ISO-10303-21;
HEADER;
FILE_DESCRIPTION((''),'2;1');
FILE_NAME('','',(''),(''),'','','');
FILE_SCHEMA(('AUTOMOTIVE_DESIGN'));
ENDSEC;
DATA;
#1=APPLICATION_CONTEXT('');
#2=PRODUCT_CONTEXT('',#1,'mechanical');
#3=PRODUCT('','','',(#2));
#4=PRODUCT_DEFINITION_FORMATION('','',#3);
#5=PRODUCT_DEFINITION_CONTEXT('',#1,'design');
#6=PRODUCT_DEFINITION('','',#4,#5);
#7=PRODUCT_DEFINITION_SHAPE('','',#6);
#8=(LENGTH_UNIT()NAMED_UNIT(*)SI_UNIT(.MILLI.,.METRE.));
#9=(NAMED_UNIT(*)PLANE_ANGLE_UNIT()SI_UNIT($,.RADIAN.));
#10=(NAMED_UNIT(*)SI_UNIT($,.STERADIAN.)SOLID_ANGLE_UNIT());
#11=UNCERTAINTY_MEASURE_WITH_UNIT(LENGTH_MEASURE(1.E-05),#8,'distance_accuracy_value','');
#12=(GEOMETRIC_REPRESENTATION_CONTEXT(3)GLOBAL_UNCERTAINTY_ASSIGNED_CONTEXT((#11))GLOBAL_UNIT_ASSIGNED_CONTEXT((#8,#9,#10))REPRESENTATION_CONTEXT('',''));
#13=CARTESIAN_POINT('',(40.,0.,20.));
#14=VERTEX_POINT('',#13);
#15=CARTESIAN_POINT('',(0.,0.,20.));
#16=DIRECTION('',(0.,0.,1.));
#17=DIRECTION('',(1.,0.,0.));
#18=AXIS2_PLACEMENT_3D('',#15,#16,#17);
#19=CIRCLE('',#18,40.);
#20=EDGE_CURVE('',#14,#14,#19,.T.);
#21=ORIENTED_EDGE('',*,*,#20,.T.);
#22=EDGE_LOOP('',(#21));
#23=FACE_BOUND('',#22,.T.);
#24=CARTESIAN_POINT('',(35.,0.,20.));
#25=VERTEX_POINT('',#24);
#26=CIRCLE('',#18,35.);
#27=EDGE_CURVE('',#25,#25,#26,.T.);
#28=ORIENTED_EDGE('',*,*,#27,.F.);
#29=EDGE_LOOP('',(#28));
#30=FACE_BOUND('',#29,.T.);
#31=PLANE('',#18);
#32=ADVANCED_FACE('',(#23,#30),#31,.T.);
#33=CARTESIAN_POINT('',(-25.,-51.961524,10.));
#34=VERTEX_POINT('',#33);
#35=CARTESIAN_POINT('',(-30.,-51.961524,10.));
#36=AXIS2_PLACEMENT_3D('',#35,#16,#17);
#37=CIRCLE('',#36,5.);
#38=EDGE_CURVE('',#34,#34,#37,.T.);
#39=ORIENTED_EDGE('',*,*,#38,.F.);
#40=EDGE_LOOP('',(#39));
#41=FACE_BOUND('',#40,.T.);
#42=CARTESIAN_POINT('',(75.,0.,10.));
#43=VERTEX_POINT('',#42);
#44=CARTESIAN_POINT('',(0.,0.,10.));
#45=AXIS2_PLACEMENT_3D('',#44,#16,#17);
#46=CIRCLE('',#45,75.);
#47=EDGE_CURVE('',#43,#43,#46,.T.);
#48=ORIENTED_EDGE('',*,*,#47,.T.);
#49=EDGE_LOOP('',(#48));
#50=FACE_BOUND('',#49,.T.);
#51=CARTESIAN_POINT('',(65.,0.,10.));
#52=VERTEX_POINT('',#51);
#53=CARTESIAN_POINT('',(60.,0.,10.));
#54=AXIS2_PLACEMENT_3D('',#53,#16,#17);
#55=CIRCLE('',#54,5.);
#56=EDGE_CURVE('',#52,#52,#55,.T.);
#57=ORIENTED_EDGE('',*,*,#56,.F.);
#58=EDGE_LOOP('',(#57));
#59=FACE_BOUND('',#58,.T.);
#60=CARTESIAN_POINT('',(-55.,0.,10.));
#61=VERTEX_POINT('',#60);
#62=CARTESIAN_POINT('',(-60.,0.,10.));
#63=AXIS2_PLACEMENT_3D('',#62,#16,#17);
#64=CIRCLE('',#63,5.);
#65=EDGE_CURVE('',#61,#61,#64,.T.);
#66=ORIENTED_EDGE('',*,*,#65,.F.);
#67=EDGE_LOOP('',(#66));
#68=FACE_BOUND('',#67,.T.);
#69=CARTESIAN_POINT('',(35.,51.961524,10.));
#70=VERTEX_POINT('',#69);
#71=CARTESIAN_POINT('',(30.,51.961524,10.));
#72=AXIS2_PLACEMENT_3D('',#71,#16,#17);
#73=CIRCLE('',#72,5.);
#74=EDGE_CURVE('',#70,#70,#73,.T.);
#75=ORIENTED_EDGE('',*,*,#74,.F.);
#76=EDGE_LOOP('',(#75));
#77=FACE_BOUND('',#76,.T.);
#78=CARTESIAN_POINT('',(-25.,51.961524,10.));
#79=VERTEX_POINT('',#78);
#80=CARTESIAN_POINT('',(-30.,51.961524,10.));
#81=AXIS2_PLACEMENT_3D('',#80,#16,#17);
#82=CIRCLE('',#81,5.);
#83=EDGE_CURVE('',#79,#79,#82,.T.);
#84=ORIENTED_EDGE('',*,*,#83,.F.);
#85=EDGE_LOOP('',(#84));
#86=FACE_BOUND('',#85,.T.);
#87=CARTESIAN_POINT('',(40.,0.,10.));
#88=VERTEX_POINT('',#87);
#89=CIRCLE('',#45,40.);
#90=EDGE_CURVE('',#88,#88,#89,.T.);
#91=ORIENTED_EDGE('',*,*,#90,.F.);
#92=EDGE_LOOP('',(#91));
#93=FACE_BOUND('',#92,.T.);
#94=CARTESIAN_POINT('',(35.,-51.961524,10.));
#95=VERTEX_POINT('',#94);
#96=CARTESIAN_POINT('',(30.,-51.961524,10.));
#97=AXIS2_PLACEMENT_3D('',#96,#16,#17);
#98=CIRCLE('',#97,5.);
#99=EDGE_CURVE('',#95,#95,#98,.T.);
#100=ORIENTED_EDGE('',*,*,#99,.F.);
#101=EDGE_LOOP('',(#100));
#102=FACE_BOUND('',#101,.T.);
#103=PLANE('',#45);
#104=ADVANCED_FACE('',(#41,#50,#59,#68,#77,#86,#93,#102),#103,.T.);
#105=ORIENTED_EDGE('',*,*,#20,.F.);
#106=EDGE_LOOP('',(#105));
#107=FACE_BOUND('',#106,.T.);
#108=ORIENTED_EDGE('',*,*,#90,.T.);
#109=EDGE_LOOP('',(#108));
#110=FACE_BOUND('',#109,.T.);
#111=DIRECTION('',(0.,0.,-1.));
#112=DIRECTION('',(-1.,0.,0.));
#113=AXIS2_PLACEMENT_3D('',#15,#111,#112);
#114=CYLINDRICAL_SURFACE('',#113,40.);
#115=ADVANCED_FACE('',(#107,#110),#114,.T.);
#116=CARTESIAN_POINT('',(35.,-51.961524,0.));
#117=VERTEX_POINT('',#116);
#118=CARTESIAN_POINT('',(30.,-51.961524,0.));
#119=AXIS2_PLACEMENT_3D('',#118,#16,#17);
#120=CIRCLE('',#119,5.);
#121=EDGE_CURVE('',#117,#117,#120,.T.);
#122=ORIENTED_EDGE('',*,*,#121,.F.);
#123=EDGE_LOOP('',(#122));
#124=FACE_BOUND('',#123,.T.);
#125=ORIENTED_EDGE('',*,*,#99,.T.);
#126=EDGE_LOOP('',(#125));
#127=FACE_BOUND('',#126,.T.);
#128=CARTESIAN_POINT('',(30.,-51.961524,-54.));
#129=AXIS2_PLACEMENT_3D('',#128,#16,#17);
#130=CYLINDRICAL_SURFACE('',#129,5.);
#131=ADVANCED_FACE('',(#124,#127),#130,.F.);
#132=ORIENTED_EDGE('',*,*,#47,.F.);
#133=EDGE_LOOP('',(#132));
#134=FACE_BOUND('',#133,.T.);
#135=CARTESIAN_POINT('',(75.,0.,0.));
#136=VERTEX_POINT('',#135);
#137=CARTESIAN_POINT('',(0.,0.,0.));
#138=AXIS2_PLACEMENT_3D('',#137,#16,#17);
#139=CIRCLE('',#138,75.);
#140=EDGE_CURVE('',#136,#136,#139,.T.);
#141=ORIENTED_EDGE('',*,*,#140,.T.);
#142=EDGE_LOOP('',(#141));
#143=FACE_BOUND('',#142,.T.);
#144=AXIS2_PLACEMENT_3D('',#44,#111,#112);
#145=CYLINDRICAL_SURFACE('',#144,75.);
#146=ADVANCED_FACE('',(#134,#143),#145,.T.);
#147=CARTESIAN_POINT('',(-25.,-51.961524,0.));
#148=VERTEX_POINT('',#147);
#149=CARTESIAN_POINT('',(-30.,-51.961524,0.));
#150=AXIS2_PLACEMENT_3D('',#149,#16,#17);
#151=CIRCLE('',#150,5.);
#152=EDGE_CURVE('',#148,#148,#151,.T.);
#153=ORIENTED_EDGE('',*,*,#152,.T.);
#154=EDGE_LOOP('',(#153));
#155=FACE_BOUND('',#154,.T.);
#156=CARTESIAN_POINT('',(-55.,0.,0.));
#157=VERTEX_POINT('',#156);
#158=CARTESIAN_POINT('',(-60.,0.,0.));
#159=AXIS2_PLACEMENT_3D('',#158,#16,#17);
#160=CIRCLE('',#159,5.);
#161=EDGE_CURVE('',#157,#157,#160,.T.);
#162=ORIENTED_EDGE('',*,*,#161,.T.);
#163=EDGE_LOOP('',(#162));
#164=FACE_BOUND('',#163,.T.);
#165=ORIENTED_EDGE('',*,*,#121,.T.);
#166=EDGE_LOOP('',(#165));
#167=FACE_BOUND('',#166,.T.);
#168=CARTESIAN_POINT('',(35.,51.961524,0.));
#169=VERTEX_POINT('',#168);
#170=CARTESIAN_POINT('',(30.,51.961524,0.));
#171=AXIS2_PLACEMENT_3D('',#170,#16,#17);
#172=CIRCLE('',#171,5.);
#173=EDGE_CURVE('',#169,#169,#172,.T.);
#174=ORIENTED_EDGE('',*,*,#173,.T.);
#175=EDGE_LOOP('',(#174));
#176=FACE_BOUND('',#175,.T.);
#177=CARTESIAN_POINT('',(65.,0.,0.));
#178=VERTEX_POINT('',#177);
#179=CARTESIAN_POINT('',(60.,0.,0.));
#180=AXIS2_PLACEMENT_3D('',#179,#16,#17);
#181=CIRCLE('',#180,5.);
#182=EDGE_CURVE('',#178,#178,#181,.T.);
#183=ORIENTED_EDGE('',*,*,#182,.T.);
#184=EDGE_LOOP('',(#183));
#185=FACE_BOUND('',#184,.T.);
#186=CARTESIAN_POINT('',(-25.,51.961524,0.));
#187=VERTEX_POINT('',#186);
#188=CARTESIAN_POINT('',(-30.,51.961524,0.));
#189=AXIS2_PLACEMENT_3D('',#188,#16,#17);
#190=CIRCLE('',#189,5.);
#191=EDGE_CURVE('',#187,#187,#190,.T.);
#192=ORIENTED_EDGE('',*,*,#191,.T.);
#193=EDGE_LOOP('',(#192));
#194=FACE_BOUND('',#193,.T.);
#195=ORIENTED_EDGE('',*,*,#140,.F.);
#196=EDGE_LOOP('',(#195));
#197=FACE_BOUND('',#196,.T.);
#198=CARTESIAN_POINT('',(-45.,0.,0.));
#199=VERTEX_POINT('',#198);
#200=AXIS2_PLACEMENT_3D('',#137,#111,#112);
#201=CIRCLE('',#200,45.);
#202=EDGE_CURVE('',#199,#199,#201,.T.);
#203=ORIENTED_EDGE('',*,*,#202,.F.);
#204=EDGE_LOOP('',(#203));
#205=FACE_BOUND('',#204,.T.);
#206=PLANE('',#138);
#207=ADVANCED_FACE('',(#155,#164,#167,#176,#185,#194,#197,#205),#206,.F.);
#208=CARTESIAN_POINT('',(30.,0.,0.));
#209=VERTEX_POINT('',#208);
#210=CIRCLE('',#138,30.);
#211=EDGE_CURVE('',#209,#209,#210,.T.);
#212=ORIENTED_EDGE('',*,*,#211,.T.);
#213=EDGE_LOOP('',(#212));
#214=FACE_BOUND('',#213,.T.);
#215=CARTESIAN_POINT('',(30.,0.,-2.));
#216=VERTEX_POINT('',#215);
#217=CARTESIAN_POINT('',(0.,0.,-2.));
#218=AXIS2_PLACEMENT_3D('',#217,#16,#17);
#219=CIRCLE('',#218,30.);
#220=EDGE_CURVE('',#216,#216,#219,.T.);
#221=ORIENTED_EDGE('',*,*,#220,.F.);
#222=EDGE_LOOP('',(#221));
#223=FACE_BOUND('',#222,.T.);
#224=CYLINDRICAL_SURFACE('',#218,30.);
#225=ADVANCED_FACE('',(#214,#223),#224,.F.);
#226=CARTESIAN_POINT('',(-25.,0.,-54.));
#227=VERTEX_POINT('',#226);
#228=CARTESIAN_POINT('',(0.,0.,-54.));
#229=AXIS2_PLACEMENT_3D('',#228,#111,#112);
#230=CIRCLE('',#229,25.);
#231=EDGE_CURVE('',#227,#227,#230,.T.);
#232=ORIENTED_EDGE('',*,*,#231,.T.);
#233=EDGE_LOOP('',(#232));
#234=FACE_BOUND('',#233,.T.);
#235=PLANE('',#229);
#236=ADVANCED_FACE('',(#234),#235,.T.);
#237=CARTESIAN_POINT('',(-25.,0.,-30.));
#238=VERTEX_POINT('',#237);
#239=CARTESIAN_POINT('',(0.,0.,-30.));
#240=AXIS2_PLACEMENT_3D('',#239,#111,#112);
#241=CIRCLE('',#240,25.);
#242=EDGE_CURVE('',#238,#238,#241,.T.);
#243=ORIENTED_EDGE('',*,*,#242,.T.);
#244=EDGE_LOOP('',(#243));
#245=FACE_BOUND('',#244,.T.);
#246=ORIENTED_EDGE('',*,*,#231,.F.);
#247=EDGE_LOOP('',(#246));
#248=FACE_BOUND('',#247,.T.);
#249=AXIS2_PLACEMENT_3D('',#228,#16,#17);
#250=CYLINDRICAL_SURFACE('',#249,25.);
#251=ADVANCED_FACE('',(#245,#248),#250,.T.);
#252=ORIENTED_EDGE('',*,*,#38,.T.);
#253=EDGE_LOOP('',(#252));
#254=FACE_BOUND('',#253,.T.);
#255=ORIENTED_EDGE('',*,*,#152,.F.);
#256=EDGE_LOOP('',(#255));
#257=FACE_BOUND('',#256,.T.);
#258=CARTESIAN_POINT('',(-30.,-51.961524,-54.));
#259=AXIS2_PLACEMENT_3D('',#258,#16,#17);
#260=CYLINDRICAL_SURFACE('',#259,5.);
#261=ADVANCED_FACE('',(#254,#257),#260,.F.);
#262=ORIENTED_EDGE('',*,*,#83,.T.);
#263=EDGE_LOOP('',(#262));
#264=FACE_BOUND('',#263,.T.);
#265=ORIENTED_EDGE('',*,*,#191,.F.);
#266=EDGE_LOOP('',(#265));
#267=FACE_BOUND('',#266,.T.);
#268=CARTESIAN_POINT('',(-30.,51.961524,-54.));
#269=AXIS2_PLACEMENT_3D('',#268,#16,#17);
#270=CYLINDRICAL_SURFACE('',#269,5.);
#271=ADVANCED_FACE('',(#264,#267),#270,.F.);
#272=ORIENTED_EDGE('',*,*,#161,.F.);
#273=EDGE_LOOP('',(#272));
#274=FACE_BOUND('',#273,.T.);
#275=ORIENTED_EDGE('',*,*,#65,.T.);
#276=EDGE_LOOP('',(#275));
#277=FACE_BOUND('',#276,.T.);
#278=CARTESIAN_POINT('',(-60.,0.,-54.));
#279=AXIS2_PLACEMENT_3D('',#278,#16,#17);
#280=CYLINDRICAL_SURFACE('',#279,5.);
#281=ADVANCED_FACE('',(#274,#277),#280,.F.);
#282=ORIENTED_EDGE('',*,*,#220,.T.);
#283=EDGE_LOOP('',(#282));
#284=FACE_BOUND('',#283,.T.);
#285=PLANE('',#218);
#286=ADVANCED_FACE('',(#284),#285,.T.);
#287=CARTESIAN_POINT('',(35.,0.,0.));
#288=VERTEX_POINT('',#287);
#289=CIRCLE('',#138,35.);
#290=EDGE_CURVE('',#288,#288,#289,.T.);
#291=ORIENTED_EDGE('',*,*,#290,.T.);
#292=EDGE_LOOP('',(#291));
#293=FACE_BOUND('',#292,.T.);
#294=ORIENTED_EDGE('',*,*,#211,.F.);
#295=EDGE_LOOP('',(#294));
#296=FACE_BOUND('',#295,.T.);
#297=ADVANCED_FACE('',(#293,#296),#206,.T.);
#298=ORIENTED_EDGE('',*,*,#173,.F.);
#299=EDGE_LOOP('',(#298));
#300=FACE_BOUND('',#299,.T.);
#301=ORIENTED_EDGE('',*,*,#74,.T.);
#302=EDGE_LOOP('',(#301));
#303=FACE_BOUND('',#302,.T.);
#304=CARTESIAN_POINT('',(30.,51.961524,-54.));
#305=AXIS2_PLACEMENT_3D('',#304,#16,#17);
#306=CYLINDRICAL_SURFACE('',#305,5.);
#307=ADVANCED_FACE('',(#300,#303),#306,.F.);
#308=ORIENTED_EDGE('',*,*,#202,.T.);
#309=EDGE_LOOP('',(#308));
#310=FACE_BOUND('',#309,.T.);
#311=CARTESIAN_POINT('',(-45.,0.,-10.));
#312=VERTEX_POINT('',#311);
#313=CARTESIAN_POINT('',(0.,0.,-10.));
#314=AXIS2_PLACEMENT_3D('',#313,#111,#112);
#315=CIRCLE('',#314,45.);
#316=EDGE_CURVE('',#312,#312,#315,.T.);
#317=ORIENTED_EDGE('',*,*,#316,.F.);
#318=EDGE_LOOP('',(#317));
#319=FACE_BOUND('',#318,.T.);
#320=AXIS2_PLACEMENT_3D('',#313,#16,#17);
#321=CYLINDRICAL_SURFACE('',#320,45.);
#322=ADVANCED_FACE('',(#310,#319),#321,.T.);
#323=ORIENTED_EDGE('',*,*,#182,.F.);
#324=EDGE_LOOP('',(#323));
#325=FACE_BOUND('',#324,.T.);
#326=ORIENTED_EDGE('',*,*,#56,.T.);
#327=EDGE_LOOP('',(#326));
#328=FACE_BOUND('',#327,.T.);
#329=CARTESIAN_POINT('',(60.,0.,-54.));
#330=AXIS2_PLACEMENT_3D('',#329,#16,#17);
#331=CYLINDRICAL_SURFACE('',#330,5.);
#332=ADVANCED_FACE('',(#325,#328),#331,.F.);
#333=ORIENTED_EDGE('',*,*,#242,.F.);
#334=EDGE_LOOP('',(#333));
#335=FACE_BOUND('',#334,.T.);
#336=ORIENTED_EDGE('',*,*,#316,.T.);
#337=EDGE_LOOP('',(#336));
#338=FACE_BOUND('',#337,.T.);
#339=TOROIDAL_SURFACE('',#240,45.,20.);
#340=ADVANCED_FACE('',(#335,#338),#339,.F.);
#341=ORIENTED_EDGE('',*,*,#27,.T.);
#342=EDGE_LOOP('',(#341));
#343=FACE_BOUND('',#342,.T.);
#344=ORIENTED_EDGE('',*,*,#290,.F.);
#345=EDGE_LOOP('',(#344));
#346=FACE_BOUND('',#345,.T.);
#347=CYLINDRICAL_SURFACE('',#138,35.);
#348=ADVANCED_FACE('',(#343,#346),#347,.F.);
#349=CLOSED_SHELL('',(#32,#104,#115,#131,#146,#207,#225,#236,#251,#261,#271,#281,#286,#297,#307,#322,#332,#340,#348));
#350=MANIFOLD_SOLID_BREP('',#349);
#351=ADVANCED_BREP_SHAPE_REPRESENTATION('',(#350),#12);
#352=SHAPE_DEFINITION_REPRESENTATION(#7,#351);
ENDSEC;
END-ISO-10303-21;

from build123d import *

# Parameters (mm, degrees)
SKETCH1_R           = 75
BOSS_EXTRUDE1_DEPTH = 10
SKETCH2_R           = 45
BOSS_EXTRUDE2_DEPTH = 10
SKETCH3_R           = 25
BOSS_EXTRUDE3_DEPTH = 44
FILLET1_R           = 20
SKETCH4_R           = 40
BOSS_EXTRUDE4_DEPTH = 10
SKETCH5_R           = 35
CUT_EXTRUDE1_DEPTH  = 20
SKETCH6_R           = 30
CUT_EXTRUDE2_DEPTH  = 2
SKETCH7_R           = 5
CUT_EXTRUDE3_DEPTH  = 124.878973196


with BuildPart() as part:
    # Sketch1 → Boss-Extrude1 (new body)
    with BuildSketch(Plane.XY):
        Circle(SKETCH1_R)
    extrude(amount=BOSS_EXTRUDE1_DEPTH)

    # Sketch2 → Boss-Extrude2 (add)
    with BuildSketch(Plane(origin=(0, 0, 0), x_dir=(-1, 0, 0), z_dir=(0, 0, -1))):
        Circle(SKETCH2_R)
    extrude(amount=BOSS_EXTRUDE2_DEPTH)

    # Sketch3 → Boss-Extrude3 (add)
    with BuildSketch(Plane(origin=(0, 0, -10), x_dir=(-1, 0, 0), z_dir=(0, 0, -1))):
        Circle(SKETCH3_R)
    extrude(amount=BOSS_EXTRUDE3_DEPTH)

    # Fillet1
    fillet1_edges = [part.edges().sort_by_distance(p)[0] for p in [
        (25, 0, -10),
    ]]
    fillet(fillet1_edges, radius=FILLET1_R - 0.0001)  # a hair under: the kernel refuses the full size

    # Sketch4 → Boss-Extrude4 (add)
    with BuildSketch(Plane.XY.offset(10)):
        Circle(SKETCH4_R)
    extrude(amount=BOSS_EXTRUDE4_DEPTH)

    # Sketch5 → Cut-Extrude1 (cut)
    with BuildSketch(Plane.XY.offset(20)):
        Circle(SKETCH5_R)
    extrude(amount=-CUT_EXTRUDE1_DEPTH, mode=Mode.SUBTRACT)

    # Sketch6 → Cut-Extrude2 (cut)
    with BuildSketch(Plane.XY):
        Circle(SKETCH6_R)
    extrude(amount=-CUT_EXTRUDE2_DEPTH, mode=Mode.SUBTRACT)

    # Sketch7 → Cut-Extrude3 (cut, through all)
    with BuildSketch(Plane.XY.offset(10)):
        with Locations((60, 0)):
            Circle(SKETCH7_R)
        with Locations((30, -51.961524227)):
            Circle(SKETCH7_R)
        with Locations((-30, -51.961524227)):
            Circle(SKETCH7_R)
        with Locations((-60, 0)):
            Circle(SKETCH7_R)
        with Locations((-30, 51.961524227)):
            Circle(SKETCH7_R)
        with Locations((30, 51.961524227)):
            Circle(SKETCH7_R)
    extrude(amount=-CUT_EXTRUDE3_DEPTH, mode=Mode.SUBTRACT)


solid = part.part
